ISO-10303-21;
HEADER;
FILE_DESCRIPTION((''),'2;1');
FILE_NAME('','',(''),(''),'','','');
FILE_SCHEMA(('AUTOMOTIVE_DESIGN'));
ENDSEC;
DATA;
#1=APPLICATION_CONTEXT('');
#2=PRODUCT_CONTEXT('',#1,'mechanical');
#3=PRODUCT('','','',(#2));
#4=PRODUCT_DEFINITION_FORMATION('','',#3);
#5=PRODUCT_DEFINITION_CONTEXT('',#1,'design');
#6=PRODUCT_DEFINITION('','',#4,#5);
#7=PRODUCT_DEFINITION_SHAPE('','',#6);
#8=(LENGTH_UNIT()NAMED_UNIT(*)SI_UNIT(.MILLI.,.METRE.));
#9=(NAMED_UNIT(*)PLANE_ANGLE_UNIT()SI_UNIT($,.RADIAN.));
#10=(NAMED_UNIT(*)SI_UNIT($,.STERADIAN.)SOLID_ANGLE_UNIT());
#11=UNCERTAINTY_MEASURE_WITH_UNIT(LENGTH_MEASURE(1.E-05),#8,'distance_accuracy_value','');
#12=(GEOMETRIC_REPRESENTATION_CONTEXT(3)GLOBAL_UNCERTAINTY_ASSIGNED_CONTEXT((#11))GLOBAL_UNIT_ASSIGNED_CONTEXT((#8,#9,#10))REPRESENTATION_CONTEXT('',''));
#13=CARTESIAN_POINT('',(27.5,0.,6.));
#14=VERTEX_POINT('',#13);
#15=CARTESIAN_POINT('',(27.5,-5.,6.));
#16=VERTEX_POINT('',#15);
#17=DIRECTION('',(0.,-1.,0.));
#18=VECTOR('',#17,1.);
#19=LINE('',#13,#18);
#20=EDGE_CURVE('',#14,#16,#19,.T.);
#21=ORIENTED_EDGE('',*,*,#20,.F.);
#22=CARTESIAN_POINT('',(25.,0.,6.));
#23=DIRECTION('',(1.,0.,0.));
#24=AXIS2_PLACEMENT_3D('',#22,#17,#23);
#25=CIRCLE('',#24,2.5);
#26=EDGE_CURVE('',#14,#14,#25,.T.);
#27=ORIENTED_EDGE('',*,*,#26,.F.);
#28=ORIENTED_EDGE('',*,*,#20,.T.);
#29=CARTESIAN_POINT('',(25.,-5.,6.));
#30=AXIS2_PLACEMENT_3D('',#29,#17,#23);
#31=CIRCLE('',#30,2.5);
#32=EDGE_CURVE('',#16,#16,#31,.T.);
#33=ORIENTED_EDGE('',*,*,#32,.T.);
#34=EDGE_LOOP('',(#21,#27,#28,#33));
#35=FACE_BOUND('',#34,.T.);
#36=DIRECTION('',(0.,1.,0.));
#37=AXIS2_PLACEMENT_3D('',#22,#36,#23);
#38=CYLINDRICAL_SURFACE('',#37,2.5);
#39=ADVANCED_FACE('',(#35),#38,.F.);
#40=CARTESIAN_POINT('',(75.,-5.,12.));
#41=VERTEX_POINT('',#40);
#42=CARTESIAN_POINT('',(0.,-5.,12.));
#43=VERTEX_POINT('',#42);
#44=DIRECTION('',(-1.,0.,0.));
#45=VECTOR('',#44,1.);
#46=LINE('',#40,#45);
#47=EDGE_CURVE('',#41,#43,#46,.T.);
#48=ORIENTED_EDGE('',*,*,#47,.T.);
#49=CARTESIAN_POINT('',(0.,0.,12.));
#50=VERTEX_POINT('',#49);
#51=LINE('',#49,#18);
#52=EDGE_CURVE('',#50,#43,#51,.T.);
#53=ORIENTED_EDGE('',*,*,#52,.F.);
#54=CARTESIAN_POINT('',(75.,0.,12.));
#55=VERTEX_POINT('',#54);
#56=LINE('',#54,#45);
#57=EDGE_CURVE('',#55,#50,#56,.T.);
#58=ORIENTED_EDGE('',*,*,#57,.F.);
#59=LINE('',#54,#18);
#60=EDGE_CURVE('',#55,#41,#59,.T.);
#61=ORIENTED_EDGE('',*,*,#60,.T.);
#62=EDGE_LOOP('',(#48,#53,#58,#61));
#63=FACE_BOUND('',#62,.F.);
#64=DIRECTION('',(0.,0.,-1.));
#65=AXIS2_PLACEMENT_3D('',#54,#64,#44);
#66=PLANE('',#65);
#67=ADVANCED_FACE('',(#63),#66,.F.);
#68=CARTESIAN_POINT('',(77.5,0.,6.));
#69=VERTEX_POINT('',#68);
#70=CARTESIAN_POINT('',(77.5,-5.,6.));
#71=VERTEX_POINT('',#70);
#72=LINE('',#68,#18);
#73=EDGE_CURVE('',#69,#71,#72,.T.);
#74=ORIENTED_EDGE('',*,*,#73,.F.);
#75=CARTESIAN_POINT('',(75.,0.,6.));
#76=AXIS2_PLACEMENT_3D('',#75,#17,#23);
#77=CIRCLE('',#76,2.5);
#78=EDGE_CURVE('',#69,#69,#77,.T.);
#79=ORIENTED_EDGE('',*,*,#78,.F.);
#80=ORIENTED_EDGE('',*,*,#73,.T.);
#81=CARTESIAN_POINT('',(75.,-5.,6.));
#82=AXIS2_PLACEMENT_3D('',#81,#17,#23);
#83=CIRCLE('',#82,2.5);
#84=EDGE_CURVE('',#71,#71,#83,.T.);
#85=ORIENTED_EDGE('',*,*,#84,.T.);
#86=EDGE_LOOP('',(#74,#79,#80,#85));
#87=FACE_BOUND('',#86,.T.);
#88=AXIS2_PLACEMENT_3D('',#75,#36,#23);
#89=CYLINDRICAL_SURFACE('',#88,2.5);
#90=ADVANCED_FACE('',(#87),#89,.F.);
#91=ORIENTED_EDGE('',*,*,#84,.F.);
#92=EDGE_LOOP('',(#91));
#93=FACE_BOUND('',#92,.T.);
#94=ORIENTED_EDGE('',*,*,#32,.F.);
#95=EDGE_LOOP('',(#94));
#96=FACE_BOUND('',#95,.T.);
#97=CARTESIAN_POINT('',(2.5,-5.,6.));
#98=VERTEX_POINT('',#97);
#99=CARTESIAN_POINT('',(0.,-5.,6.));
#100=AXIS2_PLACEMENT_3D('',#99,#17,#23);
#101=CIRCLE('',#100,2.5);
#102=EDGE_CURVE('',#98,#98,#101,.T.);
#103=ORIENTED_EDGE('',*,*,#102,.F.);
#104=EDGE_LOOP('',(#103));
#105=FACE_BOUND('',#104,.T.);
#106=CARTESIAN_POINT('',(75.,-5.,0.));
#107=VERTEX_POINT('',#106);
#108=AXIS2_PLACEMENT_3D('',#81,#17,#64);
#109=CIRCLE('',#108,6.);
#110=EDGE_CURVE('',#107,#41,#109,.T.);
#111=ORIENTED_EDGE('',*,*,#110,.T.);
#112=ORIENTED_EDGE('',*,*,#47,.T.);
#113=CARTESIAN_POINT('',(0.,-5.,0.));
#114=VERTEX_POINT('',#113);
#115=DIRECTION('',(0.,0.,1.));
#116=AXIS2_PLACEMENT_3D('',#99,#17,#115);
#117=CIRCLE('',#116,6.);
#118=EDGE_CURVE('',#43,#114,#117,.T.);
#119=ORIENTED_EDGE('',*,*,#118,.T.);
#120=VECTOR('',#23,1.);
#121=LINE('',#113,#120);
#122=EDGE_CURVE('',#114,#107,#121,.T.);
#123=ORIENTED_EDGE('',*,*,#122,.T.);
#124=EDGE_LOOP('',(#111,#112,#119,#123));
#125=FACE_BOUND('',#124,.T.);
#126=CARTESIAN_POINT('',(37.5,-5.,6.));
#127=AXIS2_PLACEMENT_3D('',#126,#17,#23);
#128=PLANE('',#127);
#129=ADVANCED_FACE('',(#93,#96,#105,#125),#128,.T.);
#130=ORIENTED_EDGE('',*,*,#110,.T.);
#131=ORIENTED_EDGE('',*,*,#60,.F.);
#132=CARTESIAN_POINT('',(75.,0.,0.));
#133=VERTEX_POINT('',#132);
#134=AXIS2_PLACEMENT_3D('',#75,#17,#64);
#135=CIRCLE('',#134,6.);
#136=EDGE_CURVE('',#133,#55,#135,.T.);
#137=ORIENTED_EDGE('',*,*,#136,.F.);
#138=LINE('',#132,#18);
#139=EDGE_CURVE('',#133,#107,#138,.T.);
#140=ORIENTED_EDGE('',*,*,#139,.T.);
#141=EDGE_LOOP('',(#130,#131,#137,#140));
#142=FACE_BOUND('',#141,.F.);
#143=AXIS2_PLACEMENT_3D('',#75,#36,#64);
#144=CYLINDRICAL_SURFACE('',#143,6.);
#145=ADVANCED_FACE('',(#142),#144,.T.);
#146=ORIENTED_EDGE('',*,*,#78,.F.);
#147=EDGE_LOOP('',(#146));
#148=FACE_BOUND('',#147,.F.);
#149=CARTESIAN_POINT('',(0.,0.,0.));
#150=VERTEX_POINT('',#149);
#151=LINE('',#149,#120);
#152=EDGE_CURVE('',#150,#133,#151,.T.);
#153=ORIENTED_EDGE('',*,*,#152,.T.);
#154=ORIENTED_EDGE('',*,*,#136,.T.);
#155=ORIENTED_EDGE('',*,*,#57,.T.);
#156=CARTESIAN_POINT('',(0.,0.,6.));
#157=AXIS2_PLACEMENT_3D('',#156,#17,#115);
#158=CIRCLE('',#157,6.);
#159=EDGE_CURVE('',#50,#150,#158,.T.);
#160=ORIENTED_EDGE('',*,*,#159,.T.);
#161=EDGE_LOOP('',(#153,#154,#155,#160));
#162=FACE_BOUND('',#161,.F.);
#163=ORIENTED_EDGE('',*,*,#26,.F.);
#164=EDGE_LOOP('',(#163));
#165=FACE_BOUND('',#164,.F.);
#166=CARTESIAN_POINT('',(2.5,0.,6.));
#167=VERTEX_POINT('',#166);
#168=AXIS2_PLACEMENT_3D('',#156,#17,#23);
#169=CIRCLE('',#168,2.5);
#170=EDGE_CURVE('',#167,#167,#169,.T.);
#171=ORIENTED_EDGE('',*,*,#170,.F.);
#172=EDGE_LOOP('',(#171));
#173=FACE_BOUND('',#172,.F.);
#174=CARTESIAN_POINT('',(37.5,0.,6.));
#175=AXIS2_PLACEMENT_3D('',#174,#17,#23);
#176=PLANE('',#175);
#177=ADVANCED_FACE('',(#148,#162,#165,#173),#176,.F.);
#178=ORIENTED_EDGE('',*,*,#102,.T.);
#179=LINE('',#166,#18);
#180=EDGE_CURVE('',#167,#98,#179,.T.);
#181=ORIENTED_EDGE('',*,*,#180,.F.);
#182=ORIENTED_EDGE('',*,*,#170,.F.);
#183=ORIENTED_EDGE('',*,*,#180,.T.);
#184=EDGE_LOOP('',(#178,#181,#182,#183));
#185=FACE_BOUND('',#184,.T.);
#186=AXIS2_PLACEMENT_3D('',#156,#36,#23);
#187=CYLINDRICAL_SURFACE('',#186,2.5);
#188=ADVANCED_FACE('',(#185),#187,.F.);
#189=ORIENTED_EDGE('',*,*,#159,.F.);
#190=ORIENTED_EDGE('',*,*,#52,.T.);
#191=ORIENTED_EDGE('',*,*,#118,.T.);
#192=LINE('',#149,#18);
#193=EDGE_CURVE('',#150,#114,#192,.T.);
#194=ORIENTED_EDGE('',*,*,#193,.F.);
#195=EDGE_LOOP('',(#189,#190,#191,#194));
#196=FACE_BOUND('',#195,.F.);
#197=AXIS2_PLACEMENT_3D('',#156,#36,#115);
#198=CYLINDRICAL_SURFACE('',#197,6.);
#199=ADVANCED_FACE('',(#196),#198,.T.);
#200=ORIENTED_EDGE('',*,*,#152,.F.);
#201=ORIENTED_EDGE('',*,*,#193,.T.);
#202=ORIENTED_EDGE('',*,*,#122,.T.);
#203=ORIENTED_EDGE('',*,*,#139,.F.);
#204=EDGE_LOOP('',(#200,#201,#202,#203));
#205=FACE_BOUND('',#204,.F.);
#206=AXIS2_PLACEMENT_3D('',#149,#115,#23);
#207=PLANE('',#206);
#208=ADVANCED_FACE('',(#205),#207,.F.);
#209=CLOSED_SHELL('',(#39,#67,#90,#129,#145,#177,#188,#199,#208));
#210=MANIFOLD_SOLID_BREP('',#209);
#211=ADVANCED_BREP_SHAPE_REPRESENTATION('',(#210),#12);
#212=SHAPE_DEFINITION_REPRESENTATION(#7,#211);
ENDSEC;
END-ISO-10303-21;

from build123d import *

# Parameters (mm, degrees)
F0_R     = 2.5
F1_DEPTH = 5


# Not quite as in the source:
# - a feature names something its author has since deleted; it is built from what else it names


with BuildPart() as f1:
    # F0 (on Front) → F1 (new body)
    with BuildSketch(Plane.XZ):
        with BuildLine():
            ThreePointArc((0, 12), (-6, 6), (0, 0))
            Line((0, 0), (75, 0))
            ThreePointArc((75, 0), (81, 6), (75, 12))
            Line((75, 12), (0, 12))
        make_face()
        with Locations((0, 6)):
            Circle(F0_R, mode=Mode.SUBTRACT)
        with Locations((25, 6)):
            Circle(F0_R, mode=Mode.SUBTRACT)
        with Locations((75, 6)):
            Circle(F0_R, mode=Mode.SUBTRACT)
    extrude(amount=F1_DEPTH)


solid = f1.part
